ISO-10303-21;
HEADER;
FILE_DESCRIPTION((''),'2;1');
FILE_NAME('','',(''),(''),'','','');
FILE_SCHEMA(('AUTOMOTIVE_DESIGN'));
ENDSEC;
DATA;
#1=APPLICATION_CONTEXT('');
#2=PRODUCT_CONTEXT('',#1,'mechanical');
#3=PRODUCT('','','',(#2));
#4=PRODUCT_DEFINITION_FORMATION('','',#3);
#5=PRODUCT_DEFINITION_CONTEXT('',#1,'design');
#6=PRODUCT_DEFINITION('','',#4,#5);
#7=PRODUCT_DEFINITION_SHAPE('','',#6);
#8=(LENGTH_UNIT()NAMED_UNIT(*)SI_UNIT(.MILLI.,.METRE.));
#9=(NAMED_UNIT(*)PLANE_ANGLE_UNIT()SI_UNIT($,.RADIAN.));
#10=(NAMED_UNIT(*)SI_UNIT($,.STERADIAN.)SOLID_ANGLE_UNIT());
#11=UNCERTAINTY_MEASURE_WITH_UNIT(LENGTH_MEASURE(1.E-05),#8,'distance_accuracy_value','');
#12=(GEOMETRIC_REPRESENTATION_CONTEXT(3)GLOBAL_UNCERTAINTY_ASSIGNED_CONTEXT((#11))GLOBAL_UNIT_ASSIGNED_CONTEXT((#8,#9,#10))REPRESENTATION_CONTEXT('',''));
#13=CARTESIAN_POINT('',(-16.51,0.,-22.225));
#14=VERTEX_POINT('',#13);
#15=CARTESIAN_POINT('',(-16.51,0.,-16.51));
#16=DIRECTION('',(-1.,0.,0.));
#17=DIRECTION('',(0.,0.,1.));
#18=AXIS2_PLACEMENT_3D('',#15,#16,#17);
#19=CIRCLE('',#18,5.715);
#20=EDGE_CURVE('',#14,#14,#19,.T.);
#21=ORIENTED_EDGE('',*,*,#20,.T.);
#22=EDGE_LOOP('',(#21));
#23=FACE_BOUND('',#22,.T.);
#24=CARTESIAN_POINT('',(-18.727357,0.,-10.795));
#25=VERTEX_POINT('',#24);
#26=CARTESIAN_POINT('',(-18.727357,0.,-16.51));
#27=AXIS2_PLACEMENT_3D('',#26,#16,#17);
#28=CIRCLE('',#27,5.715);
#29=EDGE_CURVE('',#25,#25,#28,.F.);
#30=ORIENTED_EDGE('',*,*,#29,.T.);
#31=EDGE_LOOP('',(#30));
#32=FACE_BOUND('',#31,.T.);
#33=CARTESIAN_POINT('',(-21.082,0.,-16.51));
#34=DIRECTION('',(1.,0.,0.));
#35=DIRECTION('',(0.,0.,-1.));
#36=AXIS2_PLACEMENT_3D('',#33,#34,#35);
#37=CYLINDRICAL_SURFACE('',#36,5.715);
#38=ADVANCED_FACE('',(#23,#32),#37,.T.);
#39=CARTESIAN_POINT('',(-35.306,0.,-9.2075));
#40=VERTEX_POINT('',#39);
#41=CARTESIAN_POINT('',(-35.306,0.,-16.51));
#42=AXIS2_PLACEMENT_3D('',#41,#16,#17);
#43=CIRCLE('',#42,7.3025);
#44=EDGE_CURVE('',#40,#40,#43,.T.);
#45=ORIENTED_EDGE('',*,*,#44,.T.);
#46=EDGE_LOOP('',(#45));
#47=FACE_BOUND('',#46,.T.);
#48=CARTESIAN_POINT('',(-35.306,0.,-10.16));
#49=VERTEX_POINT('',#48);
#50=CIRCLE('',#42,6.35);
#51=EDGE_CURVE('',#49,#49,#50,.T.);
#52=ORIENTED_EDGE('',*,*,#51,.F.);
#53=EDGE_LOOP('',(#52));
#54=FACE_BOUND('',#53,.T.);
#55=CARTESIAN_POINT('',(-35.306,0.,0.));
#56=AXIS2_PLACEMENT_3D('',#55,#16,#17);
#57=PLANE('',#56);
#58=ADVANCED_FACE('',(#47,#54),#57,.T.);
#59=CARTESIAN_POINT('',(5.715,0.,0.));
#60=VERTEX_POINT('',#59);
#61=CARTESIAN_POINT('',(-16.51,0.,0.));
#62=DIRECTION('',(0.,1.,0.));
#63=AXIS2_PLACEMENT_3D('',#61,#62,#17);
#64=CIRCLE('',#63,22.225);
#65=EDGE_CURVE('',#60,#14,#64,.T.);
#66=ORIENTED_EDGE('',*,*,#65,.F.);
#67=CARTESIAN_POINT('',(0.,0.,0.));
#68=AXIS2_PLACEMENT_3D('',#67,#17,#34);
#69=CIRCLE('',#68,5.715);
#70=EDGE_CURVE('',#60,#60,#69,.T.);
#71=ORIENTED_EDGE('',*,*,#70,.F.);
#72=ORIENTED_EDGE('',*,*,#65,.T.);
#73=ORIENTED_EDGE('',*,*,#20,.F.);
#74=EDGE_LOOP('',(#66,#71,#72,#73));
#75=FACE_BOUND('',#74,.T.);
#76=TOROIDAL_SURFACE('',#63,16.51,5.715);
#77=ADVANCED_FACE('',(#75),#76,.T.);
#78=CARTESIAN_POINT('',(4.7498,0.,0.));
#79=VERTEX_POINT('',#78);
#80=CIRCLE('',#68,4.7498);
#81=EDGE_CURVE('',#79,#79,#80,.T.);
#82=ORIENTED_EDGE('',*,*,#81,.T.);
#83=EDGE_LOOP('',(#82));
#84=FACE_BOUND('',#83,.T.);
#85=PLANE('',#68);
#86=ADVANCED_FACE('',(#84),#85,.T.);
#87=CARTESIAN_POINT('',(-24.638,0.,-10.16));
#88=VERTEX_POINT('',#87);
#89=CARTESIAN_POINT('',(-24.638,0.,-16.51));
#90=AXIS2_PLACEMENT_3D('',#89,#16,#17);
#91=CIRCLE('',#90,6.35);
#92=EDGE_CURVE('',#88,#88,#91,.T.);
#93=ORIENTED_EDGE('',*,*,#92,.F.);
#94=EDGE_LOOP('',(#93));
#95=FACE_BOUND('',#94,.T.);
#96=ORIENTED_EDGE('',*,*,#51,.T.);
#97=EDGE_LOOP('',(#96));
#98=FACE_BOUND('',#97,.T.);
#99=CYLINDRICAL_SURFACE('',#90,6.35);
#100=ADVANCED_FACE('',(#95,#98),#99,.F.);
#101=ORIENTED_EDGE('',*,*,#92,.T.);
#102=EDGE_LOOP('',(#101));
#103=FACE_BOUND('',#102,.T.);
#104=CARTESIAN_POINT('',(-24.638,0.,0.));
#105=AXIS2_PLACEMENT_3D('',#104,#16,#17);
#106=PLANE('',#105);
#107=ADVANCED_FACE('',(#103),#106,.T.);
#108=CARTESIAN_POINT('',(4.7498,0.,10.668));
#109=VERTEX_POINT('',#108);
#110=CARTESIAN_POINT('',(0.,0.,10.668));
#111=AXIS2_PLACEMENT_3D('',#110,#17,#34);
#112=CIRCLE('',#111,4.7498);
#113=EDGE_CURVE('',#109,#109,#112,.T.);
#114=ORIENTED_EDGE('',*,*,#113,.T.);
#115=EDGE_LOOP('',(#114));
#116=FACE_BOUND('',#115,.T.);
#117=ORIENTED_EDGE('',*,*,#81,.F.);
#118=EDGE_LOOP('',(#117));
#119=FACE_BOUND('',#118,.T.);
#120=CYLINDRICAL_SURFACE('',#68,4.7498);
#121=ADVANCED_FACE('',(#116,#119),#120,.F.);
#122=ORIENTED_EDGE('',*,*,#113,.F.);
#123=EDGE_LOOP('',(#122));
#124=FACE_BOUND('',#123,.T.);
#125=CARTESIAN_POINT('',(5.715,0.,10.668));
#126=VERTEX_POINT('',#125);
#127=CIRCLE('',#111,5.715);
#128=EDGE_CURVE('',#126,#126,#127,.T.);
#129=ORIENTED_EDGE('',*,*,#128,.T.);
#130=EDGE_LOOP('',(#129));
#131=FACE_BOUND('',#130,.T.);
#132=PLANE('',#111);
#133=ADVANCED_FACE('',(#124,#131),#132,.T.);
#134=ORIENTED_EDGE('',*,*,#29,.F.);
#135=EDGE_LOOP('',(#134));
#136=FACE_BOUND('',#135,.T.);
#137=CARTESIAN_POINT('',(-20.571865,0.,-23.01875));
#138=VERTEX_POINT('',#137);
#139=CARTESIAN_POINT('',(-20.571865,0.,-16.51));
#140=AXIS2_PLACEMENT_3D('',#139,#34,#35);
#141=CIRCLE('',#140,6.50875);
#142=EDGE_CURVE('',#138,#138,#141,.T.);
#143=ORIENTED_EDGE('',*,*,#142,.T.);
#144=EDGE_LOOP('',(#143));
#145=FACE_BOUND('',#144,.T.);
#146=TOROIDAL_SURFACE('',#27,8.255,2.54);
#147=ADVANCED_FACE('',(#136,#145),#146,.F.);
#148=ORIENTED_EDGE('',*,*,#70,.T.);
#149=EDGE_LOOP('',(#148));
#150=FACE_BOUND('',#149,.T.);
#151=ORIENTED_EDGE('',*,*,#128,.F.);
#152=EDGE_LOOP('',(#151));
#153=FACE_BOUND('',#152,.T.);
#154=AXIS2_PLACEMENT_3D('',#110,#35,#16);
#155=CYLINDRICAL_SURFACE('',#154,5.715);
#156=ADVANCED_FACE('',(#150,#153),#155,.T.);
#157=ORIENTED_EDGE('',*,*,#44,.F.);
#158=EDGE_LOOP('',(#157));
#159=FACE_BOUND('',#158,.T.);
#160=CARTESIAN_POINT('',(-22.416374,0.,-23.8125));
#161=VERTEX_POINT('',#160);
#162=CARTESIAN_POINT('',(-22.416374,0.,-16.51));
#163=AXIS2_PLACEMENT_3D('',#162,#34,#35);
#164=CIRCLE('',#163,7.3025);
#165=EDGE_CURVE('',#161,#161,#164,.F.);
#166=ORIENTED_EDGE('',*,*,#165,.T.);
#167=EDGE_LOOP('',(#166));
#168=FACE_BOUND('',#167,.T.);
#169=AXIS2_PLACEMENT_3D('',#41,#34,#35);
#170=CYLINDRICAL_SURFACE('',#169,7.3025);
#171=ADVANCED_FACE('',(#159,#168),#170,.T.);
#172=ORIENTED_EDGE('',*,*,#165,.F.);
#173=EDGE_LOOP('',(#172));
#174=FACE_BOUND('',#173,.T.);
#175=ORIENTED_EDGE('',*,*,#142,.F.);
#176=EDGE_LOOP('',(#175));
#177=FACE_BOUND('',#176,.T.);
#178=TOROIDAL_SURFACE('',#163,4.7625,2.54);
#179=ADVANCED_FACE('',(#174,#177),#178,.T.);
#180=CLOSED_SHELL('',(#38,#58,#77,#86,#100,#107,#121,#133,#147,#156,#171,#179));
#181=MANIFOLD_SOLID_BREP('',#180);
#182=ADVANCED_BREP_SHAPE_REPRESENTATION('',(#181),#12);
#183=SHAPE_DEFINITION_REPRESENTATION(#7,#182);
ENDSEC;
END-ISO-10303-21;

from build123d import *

# Parameters (mm, degrees)
SKETCH3_R           = 5.715
BOSS_EXTRUDE1_DEPTH = 10.668
SWEEP1_OUTLINE_R    = 5.715
SWEEP1_ANGLE        = 90
SKETCH9_R           = 5.715
BOSS_EXTRUDE2_DEPTH = 4.572
SKETCH11_R          = 7.3025
BOSS_EXTRUDE3_DEPTH = 14.224
FILLET1_R           = 2.54
FILLET2_R           = 2.54
SKETCH12_R          = 4.7498
CUT_EXTRUDE1_DEPTH  = 10.668
SKETCH13_R          = 6.35
CUT_EXTRUDE2_DEPTH  = 10.668


# Read off the part's stored shape, not the designer's step: Sweep1
with BuildPart() as part:
    # Sketch3 → Boss-Extrude1 (new body)
    with BuildSketch(Plane.XY):
        Circle(SKETCH3_R)
    extrude(amount=BOSS_EXTRUDE1_DEPTH)

    # Sweep1 outline → Sweep1 (revolve)
    with BuildSketch(Plane(origin=(-16.51, 0, 0), x_dir=(1, 0, 0), z_dir=(0, 0, 1))):
        with Locations((16.51, 0)):
            Circle(SWEEP1_OUTLINE_R)
    revolve(axis=Axis((-16.51, 0, 0), (0, 1, 0)), revolution_arc=SWEEP1_ANGLE)

    # Sketch9 → Boss-Extrude2 (add)
    with BuildSketch(Plane.ZY.offset(16.51)):
        with Locations(Location((-16.51, 0, 0), (0, 0, 180))):
            Circle(SKETCH9_R)
    extrude(amount=BOSS_EXTRUDE2_DEPTH)

    # Sketch11 → Boss-Extrude3 (add)
    with BuildSketch(Plane.ZY.offset(21.082)):
        with Locations((-16.51, 0)):
            Circle(SKETCH11_R)
    extrude(amount=BOSS_EXTRUDE3_DEPTH)

    # Fillet1
    # the kernel refuses this fillet: 2.54 mm, written as the material it adds along each edge
    with BuildSketch(Plane(origin=(-21.082, 0, -16.51), x_dir=(0, 0, -1), z_dir=(0, 1, 0))) as fillet1_piece_1:
        with BuildLine():
            CenterArc((8.255, -2.35464302), FILLET1_R, 112.024312837, 67.975687163)
            Line((5.715, -2.35464302), (5.6642, -2.35464302))
            Line((5.6642, -2.35464302), (5.6642, 0))
            Line((5.6642, 0), (5.715, 0.0508))
            ThreePointArc((5.715, 0.0508), (6.50875, 0.0508), (7.28345, 0.04709286))
            Line((7.28345, 0.04709286), (7.3025, 0))
        make_face()
    revolve(axis=Axis((-21.082, 0, -16.51), (-1, 0, 0)))

    # Fillet2
    fillet2_edges = [part.edges().sort_by_distance(p)[0] for p in [
        (-21.082, 7.3025, -16.51),
    ]]
    fillet(fillet2_edges, radius=FILLET2_R)

    # Sketch12 → Cut-Extrude1 (cut)
    with BuildSketch(Plane.XY.offset(10.668)):
        Circle(SKETCH12_R)
    extrude(amount=-CUT_EXTRUDE1_DEPTH, mode=Mode.SUBTRACT)

    # Sketch13 → Cut-Extrude2 (cut)
    with BuildSketch(Plane.ZY.offset(35.306)):
        with Locations((-16.51, 0)):
            Circle(SKETCH13_R)
    extrude(amount=-CUT_EXTRUDE2_DEPTH, mode=Mode.SUBTRACT)


solid = part.part
